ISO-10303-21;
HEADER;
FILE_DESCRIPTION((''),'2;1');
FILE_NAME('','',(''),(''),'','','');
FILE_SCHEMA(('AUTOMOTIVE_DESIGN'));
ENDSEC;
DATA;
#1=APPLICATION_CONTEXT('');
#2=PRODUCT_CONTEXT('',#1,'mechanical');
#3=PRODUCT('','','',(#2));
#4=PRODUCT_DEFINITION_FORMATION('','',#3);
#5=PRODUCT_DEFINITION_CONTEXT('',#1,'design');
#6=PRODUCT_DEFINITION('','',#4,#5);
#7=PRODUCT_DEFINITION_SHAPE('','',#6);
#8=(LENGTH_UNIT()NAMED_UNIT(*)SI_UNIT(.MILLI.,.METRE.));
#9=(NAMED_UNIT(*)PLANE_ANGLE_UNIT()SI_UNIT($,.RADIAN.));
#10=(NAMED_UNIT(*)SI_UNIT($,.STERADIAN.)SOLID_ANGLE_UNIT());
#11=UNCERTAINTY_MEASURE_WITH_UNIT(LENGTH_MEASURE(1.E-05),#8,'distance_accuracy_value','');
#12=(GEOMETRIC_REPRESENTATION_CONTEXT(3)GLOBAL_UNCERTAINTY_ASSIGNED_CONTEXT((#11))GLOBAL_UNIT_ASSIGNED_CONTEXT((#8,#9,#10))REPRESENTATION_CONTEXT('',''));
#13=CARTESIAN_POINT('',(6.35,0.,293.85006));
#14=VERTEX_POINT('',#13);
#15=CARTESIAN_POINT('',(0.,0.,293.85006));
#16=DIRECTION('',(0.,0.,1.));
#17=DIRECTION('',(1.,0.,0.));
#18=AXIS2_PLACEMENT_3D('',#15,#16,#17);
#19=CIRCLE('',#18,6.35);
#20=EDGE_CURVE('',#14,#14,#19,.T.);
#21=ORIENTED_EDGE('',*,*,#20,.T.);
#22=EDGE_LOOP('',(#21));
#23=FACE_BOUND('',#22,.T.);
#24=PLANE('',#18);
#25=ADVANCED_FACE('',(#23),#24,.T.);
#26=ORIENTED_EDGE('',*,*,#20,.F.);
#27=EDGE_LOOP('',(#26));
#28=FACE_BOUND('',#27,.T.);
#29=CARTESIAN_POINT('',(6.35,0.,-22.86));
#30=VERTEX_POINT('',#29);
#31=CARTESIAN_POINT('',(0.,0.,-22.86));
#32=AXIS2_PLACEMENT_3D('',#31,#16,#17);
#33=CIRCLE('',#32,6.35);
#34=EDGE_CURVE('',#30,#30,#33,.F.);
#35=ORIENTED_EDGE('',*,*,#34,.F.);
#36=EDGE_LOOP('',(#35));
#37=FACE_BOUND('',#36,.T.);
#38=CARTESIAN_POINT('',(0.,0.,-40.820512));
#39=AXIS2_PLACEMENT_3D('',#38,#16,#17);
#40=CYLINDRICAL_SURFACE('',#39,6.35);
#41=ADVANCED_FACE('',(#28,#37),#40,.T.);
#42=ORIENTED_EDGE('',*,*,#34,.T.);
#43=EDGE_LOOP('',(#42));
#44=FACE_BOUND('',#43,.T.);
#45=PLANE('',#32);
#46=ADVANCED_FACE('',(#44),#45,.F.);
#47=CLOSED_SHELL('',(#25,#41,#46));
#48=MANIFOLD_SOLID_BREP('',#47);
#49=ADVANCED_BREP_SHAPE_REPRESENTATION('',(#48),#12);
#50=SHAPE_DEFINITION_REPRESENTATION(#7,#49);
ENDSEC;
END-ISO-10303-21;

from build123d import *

# Parameters (mm, degrees)
BOSS_EXTRUDE1_START     = -316.71006
BOSS_EXTRUDE1_OUTLINE_R = 6.35
BOSS_EXTRUDE1_DEPTH     = 316.71006


# Read off the part's stored shape, not the designer's step: Boss-Extrude1
with BuildPart() as part:
    # Boss-Extrude1 outline → Boss-Extrude1 (new body)
    with BuildSketch(Plane.XY.offset(293.85006).offset(BOSS_EXTRUDE1_START)):
        Circle(BOSS_EXTRUDE1_OUTLINE_R)
    extrude(amount=BOSS_EXTRUDE1_DEPTH)


solid = part.part
